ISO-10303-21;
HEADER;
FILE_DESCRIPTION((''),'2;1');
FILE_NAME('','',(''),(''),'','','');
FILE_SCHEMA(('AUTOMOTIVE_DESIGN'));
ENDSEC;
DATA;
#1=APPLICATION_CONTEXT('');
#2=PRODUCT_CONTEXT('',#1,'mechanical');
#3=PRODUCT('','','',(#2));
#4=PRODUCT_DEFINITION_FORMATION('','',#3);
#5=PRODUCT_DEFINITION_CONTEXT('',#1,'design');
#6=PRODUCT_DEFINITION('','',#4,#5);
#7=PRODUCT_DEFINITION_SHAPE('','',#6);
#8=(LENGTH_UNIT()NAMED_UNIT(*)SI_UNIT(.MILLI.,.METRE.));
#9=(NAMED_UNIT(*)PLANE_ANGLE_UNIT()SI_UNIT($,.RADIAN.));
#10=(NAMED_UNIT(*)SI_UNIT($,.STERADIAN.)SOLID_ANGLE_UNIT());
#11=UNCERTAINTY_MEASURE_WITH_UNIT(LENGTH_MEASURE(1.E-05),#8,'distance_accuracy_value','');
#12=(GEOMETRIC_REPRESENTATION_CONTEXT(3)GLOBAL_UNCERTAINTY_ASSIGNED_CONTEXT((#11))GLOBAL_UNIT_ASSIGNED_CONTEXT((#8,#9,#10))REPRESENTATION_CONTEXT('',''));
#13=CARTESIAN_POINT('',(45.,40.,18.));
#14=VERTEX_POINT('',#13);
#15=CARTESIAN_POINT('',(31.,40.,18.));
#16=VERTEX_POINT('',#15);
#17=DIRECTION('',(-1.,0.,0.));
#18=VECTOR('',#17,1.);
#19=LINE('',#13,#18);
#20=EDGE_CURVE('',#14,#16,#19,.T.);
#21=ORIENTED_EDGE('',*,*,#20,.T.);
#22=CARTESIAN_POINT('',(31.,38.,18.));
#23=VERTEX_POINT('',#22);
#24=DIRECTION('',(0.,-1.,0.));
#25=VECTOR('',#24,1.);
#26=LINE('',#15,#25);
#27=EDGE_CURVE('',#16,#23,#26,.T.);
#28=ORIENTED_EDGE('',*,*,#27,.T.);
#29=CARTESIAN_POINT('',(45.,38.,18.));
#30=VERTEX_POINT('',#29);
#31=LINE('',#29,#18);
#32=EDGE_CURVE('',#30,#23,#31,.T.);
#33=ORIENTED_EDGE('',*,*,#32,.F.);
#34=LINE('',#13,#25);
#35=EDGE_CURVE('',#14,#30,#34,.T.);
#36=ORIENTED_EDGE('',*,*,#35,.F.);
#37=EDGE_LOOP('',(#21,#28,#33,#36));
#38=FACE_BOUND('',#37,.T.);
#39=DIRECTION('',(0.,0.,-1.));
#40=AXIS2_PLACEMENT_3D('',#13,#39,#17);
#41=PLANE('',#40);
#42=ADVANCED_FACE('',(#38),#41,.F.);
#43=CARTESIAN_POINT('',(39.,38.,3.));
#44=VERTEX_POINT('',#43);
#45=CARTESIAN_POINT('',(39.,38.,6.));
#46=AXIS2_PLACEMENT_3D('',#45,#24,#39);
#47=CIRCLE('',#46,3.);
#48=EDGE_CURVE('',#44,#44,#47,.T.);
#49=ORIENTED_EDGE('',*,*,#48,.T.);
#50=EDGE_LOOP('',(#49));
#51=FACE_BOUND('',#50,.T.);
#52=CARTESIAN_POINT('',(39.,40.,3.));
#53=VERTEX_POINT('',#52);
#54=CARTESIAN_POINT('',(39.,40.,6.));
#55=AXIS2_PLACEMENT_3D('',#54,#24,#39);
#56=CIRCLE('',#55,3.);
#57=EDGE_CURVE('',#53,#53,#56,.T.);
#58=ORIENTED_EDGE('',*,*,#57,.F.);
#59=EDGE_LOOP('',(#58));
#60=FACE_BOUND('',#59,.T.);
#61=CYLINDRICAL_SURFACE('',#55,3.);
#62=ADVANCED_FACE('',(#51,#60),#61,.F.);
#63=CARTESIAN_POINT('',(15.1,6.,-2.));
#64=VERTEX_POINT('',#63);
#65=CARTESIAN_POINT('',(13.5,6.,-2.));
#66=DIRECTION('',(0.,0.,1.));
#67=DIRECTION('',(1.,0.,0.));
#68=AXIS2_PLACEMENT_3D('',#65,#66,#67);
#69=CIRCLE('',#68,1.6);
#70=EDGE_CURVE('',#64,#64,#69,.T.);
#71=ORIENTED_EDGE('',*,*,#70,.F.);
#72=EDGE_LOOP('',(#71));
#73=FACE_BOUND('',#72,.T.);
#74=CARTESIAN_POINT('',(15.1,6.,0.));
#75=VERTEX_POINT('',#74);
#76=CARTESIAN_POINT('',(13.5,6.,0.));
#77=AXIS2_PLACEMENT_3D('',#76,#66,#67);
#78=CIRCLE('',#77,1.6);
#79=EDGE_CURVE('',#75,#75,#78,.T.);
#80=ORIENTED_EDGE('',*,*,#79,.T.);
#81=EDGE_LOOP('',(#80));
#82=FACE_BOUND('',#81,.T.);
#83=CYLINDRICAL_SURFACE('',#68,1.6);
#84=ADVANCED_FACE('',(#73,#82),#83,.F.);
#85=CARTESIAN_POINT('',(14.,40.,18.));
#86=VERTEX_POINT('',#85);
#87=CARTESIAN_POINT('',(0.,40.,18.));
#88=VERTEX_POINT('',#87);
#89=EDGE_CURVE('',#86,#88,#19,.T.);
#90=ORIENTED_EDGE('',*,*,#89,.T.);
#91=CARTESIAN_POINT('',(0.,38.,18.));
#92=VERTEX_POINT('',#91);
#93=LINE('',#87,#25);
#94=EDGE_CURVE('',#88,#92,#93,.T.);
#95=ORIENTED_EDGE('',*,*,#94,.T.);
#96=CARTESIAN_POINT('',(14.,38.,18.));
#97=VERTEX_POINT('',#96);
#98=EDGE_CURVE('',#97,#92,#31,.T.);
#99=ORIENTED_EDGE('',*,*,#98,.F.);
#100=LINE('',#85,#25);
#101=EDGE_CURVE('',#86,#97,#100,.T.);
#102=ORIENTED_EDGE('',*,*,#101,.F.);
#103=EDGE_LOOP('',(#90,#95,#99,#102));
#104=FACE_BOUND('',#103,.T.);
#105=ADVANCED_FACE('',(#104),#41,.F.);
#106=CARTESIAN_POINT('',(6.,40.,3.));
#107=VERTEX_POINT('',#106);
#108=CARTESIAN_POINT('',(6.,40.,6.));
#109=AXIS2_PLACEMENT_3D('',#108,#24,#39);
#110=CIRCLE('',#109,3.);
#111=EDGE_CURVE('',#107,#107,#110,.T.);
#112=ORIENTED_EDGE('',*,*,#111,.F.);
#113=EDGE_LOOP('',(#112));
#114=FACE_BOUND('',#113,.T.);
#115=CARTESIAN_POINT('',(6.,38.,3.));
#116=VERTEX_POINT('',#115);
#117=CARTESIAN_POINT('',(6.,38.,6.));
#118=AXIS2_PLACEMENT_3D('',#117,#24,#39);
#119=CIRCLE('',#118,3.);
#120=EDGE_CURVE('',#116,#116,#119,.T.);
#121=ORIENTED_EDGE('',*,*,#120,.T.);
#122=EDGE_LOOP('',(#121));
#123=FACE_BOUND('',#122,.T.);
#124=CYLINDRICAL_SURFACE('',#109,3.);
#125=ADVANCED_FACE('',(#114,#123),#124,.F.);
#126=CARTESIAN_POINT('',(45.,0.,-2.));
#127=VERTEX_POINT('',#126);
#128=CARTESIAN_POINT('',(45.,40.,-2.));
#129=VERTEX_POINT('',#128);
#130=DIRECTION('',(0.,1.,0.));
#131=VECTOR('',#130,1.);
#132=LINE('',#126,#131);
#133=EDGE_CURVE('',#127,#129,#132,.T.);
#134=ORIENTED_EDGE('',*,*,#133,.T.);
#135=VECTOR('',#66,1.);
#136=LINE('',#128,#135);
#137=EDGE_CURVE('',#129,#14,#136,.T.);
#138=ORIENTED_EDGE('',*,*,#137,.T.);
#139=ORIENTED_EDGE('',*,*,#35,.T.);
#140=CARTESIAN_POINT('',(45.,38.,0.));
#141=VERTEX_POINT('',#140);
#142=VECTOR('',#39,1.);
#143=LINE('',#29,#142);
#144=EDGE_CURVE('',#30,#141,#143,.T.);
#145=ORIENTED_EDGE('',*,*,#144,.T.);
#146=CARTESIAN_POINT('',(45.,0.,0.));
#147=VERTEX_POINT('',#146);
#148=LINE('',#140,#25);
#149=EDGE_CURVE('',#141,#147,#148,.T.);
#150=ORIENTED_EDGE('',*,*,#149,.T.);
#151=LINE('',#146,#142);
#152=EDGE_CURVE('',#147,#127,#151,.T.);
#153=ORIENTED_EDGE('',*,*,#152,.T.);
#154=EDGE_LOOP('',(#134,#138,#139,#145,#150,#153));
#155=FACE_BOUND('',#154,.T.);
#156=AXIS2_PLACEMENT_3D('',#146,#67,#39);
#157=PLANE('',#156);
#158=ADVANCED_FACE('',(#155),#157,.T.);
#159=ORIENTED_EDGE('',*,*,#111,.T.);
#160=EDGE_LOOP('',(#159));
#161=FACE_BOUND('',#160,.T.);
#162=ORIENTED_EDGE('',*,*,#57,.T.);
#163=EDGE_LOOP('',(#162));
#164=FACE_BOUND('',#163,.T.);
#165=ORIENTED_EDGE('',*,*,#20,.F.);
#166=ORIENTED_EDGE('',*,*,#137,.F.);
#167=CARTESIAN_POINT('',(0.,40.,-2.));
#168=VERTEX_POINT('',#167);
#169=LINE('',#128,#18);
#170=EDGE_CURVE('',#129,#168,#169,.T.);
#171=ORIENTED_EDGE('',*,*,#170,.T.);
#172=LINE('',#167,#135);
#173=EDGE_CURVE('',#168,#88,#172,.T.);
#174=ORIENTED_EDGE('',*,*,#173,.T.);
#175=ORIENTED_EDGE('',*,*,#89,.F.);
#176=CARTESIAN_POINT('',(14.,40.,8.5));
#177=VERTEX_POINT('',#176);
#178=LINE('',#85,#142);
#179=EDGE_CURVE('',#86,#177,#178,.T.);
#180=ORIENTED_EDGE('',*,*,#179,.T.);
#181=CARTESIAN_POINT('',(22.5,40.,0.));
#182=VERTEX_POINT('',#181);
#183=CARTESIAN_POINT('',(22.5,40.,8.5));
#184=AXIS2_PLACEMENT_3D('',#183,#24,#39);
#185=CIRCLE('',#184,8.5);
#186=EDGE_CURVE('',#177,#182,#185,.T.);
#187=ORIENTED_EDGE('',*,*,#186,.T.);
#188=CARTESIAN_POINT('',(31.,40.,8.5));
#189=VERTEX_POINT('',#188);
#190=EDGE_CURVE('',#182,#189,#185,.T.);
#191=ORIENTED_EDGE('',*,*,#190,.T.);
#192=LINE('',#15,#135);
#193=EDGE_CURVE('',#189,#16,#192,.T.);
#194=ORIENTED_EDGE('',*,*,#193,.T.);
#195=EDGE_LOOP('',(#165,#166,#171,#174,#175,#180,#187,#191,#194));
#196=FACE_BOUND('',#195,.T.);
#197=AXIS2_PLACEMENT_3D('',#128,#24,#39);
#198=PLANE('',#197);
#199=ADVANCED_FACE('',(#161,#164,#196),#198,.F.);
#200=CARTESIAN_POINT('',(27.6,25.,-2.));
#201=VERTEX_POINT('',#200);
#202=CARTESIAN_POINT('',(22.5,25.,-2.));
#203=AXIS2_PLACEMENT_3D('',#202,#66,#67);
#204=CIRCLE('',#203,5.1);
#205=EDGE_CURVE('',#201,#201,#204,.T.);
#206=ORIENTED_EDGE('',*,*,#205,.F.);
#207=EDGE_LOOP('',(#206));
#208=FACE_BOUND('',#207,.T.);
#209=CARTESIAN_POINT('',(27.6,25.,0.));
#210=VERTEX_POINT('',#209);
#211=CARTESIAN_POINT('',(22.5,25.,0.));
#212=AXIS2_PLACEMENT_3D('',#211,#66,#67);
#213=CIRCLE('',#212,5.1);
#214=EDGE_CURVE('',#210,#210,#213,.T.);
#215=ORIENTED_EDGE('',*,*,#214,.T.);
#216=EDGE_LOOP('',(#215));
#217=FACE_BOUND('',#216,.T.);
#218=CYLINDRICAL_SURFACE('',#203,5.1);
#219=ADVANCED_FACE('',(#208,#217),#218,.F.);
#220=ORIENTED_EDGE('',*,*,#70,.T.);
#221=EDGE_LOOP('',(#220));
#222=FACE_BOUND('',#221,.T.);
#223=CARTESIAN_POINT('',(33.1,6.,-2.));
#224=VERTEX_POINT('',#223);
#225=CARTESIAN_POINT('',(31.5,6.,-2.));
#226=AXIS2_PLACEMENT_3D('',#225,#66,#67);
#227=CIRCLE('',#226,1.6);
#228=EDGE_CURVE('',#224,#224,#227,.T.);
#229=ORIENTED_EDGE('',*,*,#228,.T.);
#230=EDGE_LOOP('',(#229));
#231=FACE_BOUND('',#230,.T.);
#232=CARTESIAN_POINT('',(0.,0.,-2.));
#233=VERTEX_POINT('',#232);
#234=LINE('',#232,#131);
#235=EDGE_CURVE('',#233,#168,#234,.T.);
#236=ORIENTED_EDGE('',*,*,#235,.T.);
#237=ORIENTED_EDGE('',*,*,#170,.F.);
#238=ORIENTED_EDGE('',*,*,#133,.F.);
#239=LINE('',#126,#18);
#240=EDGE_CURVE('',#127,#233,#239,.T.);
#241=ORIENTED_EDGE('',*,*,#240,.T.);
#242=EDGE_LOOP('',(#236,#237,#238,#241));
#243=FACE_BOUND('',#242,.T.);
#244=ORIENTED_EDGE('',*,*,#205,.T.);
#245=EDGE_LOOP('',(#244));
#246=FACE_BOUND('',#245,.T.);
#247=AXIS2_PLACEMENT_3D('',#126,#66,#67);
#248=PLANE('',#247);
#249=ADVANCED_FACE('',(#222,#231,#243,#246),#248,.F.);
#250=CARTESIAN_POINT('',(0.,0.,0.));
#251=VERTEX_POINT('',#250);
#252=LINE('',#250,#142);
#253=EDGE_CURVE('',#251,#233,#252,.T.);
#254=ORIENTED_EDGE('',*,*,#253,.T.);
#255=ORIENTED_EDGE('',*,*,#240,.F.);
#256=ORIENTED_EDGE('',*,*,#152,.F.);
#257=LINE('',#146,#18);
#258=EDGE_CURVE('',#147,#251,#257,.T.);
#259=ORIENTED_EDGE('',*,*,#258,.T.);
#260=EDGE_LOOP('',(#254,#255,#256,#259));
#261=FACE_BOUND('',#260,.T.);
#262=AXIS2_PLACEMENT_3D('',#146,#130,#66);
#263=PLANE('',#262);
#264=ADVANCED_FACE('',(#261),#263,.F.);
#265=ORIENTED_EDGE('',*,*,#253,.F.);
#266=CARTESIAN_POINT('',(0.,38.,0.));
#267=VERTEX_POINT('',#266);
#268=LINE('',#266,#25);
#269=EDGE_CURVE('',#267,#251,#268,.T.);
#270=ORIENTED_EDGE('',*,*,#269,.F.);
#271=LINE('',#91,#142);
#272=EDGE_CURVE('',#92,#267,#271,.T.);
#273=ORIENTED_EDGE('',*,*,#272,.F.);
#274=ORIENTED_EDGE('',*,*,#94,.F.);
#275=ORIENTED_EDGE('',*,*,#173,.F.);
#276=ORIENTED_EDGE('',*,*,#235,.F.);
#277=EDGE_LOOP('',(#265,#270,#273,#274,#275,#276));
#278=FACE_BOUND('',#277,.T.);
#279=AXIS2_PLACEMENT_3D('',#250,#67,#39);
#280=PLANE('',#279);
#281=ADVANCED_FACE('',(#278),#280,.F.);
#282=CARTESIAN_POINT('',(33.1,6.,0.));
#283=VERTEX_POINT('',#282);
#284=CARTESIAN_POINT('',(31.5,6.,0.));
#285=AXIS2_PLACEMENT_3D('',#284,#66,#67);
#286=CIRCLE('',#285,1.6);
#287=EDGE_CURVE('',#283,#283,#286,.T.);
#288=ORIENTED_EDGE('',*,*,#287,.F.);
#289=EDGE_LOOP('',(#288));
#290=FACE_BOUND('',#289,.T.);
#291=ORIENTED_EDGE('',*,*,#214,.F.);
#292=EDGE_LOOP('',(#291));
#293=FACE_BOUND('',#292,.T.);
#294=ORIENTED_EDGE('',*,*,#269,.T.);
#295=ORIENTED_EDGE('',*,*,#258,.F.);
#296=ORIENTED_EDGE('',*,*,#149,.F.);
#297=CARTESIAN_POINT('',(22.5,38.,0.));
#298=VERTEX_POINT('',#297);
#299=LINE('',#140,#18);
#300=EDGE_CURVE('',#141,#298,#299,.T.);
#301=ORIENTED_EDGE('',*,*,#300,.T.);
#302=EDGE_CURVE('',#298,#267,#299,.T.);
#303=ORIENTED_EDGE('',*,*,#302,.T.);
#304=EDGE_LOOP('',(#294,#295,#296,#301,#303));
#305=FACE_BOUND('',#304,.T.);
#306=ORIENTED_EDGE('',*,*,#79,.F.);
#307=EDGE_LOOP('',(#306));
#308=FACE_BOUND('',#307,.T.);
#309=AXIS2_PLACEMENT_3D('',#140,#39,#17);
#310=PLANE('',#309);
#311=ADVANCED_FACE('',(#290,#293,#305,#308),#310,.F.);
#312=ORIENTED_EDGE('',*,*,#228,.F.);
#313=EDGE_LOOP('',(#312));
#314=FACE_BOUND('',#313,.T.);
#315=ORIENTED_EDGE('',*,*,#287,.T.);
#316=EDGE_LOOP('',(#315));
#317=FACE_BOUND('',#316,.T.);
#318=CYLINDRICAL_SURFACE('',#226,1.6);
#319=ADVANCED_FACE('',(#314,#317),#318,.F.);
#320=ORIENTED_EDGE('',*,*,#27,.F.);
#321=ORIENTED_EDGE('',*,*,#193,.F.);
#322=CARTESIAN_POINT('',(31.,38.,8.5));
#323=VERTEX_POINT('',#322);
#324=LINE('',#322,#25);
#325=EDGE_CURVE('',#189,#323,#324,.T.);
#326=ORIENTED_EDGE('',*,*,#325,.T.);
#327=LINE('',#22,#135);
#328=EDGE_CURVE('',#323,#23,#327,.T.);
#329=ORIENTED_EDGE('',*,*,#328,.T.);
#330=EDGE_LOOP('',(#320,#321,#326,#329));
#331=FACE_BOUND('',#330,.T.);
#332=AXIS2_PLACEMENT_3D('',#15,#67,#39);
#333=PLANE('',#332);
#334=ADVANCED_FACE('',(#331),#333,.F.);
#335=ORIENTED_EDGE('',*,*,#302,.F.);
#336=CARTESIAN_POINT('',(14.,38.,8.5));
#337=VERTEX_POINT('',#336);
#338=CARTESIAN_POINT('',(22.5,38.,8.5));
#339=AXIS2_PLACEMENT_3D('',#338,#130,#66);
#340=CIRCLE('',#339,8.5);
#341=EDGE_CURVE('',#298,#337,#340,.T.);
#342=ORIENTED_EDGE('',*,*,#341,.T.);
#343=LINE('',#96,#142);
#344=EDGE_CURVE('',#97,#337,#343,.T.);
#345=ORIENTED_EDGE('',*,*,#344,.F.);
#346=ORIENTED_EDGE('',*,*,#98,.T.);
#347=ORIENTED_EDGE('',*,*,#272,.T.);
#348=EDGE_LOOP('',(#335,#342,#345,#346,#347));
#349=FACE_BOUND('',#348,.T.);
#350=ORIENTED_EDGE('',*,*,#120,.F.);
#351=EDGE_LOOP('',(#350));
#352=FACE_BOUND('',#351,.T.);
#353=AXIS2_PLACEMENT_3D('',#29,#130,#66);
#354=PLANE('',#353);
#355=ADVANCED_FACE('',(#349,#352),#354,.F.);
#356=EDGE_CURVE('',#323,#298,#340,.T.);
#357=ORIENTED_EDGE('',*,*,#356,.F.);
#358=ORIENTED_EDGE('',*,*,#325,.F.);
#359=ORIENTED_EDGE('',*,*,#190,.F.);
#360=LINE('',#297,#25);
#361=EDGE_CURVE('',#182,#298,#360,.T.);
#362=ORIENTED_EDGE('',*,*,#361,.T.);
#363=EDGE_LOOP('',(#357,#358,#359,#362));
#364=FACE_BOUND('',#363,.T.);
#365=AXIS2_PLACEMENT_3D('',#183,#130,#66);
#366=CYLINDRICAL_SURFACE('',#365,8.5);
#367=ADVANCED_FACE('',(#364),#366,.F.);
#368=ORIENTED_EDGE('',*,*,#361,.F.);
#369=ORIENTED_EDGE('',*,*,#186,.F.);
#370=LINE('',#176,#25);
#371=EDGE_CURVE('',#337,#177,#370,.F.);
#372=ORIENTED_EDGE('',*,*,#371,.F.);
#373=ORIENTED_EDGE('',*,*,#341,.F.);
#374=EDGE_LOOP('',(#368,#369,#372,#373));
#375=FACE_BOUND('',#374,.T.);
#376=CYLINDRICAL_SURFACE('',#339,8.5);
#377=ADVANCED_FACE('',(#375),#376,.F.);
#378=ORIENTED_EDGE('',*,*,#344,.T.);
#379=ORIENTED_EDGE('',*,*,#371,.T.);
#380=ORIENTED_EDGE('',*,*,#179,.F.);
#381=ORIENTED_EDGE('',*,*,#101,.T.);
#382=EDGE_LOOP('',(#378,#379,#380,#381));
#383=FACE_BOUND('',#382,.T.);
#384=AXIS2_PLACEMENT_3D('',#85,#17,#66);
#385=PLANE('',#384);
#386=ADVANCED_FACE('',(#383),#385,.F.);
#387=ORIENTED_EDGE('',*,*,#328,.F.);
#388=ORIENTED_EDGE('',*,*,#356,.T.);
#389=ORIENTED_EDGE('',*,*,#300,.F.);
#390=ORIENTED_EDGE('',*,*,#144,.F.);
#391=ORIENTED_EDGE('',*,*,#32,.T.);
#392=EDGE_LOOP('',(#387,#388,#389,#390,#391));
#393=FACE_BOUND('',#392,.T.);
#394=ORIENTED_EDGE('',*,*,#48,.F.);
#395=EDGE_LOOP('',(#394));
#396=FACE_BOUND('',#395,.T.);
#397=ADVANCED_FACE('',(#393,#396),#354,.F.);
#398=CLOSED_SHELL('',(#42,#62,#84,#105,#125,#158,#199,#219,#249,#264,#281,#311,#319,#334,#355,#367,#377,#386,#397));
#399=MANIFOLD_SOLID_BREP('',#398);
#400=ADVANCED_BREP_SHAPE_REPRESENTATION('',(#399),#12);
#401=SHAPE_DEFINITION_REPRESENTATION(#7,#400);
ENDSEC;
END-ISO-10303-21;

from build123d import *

# Parameters (mm, degrees)
EXTRUDE_1_DEPTH     = 45
SKETCH_2_R          = 5.1
SKETCH_2_R_2        = 1.6
CUT_EXTRUDE_1_DEPTH = 63.841069373
SKETCH_3_R          = 3
SKETCH_3_W          = 17
SKETCH_3_H          = 18
CUT_EXTRUDE_2_DEPTH = 62.587336361
FILLET_1_R          = 8.5


with BuildPart() as part:
    # ｽｹｯﾁ1 → ﾎﾞｽ - 押し出し1 (new body)
    with BuildSketch(Plane(origin=(0, 0, 0), x_dir=(0, 0, -1), z_dir=(1, 0, 0))):
        Polygon((-18, 40), (-18, 38), (0, 38), (0, 0), (2, 0), (2, 40), align=None)
    extrude(amount=EXTRUDE_1_DEPTH)

    # ｽｹｯﾁ2 → ｶｯﾄ - 押し出し1 (cut, through all)
    with BuildSketch(Plane.XY):
        with Locations((22.5, 25)):
            Circle(SKETCH_2_R)
        with Locations((13.5, 6)):
            Circle(SKETCH_2_R_2)
        with Locations((31.5, 6)):
            Circle(SKETCH_2_R_2)
    extrude(amount=-CUT_EXTRUDE_1_DEPTH, mode=Mode.SUBTRACT)

    # ｽｹｯﾁ3 → ｶｯﾄ - 押し出し2 (cut, through all)
    with BuildSketch(Plane.XZ.offset(-38)):
        with Locations(Location((6, 6, 0), (0, 0, 270))):
            Circle(SKETCH_3_R)
        with Locations(Location((39, 6, 0), (0, 0, 270))):
            Circle(SKETCH_3_R)
        with Locations((22.5, 9)):
            Rectangle(SKETCH_3_W, SKETCH_3_H)
    extrude(amount=-CUT_EXTRUDE_2_DEPTH, mode=Mode.SUBTRACT)

    # ﾌｨﾚｯﾄ1
    fillet_1_edges = [part.edges().sort_by_distance(p)[0] for p in [
        (31, 39, 0),
        (14, 39, 0),
    ]]
    fillet(fillet_1_edges, radius=FILLET_1_R - 0.0001)  # a hair under: the kernel refuses the full size


solid = part.part
